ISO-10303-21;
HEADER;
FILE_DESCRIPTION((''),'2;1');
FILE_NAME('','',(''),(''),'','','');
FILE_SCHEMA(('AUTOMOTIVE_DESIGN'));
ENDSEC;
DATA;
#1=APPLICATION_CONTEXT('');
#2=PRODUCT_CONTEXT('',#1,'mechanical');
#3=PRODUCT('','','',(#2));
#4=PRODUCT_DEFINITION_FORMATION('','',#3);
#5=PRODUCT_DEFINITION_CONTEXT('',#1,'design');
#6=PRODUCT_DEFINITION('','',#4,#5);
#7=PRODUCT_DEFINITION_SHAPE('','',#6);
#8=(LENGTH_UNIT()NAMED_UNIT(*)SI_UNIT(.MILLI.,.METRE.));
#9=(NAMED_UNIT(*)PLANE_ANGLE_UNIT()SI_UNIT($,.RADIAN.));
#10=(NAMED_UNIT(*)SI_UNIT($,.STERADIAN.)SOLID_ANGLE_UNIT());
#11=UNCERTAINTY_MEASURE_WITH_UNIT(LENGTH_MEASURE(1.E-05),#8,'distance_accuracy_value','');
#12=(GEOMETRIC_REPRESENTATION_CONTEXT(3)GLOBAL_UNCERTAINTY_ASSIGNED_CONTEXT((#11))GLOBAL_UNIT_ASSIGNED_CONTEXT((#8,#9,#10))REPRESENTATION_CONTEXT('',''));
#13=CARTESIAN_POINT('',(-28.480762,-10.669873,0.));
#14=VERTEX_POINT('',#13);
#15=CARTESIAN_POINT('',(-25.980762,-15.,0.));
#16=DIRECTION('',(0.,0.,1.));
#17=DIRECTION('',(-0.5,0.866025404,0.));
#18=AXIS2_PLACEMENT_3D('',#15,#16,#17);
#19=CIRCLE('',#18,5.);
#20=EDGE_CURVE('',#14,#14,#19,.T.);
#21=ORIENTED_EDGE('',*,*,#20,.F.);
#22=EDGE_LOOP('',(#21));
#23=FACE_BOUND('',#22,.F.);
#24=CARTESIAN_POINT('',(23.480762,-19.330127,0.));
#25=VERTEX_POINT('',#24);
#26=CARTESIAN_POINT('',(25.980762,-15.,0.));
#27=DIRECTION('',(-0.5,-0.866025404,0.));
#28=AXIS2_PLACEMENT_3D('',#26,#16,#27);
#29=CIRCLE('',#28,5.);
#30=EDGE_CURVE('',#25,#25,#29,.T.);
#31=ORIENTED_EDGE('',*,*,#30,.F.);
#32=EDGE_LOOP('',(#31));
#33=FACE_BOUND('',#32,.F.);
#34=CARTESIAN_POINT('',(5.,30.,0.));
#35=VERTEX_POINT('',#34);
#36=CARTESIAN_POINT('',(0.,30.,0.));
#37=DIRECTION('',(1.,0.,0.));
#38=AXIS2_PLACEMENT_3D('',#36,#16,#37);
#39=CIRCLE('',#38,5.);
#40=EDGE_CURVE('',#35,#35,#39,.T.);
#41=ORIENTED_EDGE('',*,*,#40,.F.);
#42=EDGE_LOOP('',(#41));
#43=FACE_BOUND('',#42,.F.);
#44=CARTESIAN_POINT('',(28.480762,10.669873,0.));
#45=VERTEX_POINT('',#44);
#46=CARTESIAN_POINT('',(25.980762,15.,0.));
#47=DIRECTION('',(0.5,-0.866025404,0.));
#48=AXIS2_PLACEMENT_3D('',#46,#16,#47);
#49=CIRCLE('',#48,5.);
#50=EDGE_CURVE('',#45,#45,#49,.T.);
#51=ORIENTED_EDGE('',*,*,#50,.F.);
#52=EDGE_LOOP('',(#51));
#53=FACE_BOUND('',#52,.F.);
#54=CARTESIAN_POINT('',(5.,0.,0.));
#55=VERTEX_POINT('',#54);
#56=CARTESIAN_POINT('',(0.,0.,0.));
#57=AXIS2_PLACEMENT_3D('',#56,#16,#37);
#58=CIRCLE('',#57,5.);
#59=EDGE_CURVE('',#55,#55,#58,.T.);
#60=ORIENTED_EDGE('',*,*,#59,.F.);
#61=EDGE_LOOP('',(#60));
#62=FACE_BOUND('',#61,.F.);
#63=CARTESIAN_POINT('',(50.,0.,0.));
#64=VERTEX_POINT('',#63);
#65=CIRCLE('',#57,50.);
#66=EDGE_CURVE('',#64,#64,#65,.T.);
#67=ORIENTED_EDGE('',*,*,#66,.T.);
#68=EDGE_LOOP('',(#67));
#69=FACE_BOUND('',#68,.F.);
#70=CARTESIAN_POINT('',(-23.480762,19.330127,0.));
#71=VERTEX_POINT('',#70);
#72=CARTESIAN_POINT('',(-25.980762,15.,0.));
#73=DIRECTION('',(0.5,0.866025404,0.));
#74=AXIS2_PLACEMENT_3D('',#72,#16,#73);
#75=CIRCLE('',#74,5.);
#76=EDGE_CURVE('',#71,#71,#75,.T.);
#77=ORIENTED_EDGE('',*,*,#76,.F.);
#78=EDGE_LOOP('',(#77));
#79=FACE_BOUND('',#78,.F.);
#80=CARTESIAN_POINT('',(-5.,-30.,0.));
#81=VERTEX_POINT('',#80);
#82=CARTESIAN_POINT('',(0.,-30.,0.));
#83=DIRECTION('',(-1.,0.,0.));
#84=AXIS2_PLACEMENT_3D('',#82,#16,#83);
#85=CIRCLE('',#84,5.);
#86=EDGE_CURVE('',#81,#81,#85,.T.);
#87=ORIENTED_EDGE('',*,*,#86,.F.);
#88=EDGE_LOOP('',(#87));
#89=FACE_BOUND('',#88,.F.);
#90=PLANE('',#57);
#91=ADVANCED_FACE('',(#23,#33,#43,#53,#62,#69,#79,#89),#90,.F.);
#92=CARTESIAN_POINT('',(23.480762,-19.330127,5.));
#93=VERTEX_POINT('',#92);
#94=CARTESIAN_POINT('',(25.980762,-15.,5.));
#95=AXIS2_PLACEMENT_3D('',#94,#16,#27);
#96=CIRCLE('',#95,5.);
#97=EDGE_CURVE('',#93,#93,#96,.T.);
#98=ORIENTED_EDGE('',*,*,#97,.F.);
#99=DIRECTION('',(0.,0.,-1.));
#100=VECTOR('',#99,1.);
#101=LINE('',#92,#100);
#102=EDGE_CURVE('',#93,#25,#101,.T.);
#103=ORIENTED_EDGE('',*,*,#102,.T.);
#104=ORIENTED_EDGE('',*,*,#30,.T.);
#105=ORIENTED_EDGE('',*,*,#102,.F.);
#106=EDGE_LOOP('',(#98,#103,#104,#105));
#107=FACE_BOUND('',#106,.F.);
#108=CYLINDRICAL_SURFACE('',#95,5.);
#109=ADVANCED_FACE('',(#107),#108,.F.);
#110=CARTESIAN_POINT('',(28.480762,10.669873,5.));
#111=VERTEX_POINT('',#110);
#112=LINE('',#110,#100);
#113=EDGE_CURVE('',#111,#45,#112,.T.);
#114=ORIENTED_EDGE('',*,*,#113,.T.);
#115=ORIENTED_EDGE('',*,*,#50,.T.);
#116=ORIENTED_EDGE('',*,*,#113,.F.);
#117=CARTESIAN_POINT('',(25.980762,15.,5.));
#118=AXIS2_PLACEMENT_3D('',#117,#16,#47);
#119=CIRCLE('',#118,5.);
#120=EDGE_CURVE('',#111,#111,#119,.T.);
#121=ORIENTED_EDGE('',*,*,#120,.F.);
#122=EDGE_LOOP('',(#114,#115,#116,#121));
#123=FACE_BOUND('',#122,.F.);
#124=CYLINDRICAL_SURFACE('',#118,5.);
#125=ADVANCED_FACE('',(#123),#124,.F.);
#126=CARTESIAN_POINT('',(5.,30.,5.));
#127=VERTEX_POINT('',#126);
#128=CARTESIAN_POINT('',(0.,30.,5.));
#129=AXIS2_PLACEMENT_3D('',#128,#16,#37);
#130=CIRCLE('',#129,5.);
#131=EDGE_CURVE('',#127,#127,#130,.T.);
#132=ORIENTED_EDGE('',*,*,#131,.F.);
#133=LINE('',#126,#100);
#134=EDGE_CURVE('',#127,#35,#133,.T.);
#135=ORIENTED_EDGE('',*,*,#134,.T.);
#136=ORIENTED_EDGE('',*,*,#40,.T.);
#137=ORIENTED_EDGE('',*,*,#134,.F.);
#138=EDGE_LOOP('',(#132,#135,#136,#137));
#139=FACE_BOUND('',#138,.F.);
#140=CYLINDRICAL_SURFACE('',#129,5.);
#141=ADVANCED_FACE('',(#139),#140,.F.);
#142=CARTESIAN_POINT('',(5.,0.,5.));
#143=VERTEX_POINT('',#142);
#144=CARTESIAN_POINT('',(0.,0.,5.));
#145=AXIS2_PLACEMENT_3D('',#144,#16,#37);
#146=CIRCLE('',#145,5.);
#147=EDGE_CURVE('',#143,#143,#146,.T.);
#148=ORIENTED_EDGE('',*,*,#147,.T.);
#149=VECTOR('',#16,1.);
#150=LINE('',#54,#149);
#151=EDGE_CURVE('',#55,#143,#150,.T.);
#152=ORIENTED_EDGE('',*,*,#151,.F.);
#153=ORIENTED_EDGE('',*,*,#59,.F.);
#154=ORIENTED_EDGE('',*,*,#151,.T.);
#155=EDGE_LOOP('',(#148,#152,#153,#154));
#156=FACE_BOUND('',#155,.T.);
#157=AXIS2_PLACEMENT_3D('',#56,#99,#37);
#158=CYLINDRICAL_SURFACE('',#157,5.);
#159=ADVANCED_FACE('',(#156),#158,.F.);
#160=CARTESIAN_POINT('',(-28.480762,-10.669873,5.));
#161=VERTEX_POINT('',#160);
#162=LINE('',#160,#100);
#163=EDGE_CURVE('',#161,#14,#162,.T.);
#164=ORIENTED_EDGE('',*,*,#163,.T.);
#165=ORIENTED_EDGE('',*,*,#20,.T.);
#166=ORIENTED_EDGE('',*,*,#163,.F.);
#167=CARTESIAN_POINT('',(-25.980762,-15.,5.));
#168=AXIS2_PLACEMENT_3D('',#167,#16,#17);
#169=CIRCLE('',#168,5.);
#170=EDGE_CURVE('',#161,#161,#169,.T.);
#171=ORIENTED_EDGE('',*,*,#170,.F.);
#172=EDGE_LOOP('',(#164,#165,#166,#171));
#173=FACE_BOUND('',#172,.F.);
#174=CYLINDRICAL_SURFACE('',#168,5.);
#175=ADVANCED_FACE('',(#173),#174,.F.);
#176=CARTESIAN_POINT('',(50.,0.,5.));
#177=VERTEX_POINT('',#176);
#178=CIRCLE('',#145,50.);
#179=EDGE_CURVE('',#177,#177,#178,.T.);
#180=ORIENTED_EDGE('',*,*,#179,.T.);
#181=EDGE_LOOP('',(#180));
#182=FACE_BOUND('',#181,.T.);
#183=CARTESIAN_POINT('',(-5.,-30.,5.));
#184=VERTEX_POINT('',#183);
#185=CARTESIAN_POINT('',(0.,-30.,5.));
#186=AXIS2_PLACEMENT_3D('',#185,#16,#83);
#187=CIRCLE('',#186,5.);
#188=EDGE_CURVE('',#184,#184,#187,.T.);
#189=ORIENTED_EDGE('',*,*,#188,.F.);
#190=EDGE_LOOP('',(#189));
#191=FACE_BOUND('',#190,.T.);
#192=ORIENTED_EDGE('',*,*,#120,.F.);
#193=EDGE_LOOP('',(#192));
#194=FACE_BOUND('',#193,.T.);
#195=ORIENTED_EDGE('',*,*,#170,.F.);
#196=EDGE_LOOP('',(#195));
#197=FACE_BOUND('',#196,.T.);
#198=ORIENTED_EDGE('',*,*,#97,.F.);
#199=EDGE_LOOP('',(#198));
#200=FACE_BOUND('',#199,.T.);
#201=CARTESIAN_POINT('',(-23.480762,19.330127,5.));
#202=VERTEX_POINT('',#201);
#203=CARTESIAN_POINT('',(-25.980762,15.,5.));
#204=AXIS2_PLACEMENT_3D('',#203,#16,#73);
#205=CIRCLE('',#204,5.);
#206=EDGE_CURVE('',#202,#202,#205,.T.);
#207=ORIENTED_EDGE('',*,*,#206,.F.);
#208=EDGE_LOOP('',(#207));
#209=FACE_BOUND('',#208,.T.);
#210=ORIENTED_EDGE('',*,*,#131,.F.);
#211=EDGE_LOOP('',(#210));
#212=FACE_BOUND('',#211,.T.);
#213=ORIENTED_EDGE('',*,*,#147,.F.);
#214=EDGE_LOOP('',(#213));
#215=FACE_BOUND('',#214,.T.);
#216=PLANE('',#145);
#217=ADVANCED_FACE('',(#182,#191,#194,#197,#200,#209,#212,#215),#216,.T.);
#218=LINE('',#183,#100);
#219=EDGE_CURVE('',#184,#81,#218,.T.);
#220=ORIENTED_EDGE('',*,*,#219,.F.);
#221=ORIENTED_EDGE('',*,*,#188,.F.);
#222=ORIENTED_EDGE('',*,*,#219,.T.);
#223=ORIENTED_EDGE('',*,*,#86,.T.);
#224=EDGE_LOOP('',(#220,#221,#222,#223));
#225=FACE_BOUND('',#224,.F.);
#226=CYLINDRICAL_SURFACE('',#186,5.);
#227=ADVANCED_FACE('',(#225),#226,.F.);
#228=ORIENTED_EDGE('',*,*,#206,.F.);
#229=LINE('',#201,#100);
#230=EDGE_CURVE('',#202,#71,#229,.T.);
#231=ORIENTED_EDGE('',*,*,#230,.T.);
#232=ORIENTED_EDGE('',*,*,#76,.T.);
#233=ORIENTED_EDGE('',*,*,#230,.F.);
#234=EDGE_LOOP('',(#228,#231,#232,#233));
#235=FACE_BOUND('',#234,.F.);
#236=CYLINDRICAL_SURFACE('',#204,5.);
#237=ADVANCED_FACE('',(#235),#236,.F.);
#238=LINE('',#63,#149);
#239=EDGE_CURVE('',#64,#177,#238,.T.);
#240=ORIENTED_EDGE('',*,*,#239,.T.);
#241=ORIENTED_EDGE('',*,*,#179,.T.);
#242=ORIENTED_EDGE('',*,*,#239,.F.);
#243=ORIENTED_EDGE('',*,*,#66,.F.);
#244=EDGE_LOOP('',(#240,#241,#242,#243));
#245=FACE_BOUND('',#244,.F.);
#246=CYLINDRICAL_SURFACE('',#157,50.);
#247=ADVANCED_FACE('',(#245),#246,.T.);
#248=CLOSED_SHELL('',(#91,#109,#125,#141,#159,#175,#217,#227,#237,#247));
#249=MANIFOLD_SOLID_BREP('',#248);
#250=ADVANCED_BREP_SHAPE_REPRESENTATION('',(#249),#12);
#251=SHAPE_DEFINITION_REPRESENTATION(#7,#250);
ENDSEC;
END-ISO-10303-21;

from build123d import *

# Parameters (mm, degrees)
F0_R            = 50
F0_R_2          = 5
F1_DEPTH        = 5
F2_R            = 5
F3_DEPTH        = 25
F3_COPIES_COUNT = 6


# Not quite as in the source:
# - a pattern or mirror of a feature is missing from the dataset's text; its kind, count and spacing are read off the source's solid


with BuildPart() as f1:
    # F0 (on Top) → F1 (new body)
    with BuildSketch(Plane.XY):
        Circle(F0_R)
        Circle(F0_R_2, mode=Mode.SUBTRACT)
    extrude(amount=F1_DEPTH)

    # F2 (on face) → F3 (cut)
    with BuildSketch(Plane.XY.offset(5)):
        with Locations((0, 30)):
            Circle(F2_R)
    f3 = extrude(amount=-F3_DEPTH, mode=Mode.SUBTRACT)

    # F3_copies: F3 ×6 about axis
    f3_copies_axis = Axis((0, 0, 0), (0, 0, 1))
    for i in range(1, F3_COPIES_COUNT):
        add(f3.rotate(f3_copies_axis, i * 360 / F3_COPIES_COUNT), mode=Mode.SUBTRACT)


solid = f1.part
